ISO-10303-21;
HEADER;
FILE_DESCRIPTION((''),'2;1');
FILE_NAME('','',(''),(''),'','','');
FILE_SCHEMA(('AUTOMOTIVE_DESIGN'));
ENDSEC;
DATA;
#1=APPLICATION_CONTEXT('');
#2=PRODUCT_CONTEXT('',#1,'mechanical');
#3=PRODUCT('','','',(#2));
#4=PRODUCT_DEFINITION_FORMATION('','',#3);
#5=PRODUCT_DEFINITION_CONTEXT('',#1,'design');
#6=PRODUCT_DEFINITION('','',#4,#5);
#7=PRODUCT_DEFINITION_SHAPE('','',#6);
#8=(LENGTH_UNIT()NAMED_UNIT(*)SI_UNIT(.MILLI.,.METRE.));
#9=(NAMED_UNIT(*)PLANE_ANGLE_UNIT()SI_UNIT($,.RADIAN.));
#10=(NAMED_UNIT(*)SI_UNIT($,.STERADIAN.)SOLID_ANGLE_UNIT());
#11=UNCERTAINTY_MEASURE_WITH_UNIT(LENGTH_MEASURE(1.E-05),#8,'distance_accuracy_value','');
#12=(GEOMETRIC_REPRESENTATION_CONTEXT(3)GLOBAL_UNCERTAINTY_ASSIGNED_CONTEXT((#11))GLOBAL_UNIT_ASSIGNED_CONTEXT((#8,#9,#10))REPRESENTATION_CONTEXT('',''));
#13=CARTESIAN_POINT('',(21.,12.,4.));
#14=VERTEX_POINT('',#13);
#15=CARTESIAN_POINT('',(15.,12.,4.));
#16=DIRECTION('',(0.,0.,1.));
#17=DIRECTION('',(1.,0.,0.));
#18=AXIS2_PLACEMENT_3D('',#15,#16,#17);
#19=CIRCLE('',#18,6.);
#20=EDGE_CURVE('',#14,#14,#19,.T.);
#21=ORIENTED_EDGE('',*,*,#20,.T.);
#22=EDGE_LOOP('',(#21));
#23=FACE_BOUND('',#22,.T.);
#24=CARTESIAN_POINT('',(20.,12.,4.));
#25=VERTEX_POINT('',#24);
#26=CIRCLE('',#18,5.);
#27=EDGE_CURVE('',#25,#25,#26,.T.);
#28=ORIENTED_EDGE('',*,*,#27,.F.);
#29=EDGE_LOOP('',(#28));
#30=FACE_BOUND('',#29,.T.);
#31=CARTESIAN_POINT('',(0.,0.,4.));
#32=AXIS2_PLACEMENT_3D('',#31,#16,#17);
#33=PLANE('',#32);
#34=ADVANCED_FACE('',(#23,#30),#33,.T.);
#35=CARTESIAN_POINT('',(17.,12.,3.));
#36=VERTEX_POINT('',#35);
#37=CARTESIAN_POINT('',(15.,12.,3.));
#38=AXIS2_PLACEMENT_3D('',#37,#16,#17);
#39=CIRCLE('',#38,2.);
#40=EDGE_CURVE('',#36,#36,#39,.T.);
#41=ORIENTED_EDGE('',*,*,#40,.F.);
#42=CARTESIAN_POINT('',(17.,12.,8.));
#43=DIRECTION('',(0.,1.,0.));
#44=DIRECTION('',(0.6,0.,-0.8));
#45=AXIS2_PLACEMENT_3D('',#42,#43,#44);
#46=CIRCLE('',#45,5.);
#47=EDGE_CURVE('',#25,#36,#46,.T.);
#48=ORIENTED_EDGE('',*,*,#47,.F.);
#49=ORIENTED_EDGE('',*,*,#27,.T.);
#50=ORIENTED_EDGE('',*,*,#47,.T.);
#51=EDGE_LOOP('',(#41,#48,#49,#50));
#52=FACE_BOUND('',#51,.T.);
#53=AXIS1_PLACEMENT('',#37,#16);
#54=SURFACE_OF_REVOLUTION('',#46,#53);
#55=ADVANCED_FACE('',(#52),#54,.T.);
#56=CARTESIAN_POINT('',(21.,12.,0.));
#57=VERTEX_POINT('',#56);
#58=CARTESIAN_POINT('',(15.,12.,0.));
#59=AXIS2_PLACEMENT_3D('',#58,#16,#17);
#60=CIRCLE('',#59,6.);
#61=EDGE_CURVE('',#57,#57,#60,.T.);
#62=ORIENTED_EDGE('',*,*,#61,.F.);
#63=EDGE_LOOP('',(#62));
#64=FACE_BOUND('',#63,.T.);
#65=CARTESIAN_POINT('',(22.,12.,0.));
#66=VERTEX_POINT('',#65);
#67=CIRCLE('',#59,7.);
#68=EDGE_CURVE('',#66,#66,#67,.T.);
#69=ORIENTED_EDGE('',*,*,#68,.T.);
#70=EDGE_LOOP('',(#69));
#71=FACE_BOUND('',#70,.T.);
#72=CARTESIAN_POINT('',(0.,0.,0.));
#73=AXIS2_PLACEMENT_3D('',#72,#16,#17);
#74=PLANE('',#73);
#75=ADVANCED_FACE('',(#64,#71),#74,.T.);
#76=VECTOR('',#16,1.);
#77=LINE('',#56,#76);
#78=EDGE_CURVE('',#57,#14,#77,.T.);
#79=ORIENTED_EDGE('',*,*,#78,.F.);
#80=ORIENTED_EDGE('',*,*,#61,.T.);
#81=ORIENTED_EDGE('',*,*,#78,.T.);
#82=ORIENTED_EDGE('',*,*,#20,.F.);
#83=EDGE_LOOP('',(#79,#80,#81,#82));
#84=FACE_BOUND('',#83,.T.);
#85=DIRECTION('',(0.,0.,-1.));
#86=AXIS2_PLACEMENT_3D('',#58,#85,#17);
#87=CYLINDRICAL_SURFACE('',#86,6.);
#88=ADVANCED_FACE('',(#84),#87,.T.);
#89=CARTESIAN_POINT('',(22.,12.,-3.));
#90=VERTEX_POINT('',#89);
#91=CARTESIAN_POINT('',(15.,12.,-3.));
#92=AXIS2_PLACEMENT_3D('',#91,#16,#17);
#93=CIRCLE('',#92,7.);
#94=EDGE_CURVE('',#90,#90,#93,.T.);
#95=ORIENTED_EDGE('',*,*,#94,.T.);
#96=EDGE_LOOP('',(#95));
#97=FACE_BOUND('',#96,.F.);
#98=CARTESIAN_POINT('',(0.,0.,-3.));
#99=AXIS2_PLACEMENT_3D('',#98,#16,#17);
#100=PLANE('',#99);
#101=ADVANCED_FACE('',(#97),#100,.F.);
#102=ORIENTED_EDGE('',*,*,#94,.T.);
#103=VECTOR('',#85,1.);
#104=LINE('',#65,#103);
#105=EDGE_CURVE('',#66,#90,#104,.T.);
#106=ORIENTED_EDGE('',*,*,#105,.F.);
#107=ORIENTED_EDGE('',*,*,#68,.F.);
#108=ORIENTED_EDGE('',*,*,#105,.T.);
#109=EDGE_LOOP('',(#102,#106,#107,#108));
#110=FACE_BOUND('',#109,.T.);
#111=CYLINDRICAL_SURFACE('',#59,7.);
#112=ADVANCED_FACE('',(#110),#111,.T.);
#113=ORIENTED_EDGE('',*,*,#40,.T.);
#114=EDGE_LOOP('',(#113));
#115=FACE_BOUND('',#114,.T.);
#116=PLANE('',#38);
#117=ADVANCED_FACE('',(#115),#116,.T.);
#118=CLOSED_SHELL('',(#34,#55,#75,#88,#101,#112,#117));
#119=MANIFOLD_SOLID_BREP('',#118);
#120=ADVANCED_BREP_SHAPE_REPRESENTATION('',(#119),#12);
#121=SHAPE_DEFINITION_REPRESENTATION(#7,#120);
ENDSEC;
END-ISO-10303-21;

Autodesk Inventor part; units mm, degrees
ref_plane "YZ Plane" through (0, 0, 0) normal (1, 0, 0) x (0, 1, 0)
ref_plane "XZ Plane" through (0, 0, 0) normal (0, 1, 0) x (-1, 0, 0)
ref_plane "XY Plane" through (0, 0, 0) normal (0, 0, 1) x (1, 0, 0)
sketch "Sketch1" plane through (0, 0, 0) normal (0, 0, 1) x (1, 0, 0)
  circle A0 centre (15, 12) radius 6
  circle A1 centre (15, 12) radius 7
  point P0 (0, 0)
  dimension "d0" = 12
  dimension "d1" = 14
extrude "Extrusion1" add sketch "Sketch1" along normal blind 4 contours A0
extrude "Extrusion2" add sketch "Sketch1" against normal blind 3 contours A0 | A1
sketch "Sketch2" plane through (15, 12, 4) normal (0, 0, 1) x (1, 0, 0)
  circle A0 centre (0, 0) radius 5
  point P0 (-15, -12)
  dimension "d6" = 10
extrude "Extrusion3" cut sketch "Sketch2" against normal blind 1
fillet "Fillet1" radius 5 1 edges at (10, 12, 3)
properties part number "but"
